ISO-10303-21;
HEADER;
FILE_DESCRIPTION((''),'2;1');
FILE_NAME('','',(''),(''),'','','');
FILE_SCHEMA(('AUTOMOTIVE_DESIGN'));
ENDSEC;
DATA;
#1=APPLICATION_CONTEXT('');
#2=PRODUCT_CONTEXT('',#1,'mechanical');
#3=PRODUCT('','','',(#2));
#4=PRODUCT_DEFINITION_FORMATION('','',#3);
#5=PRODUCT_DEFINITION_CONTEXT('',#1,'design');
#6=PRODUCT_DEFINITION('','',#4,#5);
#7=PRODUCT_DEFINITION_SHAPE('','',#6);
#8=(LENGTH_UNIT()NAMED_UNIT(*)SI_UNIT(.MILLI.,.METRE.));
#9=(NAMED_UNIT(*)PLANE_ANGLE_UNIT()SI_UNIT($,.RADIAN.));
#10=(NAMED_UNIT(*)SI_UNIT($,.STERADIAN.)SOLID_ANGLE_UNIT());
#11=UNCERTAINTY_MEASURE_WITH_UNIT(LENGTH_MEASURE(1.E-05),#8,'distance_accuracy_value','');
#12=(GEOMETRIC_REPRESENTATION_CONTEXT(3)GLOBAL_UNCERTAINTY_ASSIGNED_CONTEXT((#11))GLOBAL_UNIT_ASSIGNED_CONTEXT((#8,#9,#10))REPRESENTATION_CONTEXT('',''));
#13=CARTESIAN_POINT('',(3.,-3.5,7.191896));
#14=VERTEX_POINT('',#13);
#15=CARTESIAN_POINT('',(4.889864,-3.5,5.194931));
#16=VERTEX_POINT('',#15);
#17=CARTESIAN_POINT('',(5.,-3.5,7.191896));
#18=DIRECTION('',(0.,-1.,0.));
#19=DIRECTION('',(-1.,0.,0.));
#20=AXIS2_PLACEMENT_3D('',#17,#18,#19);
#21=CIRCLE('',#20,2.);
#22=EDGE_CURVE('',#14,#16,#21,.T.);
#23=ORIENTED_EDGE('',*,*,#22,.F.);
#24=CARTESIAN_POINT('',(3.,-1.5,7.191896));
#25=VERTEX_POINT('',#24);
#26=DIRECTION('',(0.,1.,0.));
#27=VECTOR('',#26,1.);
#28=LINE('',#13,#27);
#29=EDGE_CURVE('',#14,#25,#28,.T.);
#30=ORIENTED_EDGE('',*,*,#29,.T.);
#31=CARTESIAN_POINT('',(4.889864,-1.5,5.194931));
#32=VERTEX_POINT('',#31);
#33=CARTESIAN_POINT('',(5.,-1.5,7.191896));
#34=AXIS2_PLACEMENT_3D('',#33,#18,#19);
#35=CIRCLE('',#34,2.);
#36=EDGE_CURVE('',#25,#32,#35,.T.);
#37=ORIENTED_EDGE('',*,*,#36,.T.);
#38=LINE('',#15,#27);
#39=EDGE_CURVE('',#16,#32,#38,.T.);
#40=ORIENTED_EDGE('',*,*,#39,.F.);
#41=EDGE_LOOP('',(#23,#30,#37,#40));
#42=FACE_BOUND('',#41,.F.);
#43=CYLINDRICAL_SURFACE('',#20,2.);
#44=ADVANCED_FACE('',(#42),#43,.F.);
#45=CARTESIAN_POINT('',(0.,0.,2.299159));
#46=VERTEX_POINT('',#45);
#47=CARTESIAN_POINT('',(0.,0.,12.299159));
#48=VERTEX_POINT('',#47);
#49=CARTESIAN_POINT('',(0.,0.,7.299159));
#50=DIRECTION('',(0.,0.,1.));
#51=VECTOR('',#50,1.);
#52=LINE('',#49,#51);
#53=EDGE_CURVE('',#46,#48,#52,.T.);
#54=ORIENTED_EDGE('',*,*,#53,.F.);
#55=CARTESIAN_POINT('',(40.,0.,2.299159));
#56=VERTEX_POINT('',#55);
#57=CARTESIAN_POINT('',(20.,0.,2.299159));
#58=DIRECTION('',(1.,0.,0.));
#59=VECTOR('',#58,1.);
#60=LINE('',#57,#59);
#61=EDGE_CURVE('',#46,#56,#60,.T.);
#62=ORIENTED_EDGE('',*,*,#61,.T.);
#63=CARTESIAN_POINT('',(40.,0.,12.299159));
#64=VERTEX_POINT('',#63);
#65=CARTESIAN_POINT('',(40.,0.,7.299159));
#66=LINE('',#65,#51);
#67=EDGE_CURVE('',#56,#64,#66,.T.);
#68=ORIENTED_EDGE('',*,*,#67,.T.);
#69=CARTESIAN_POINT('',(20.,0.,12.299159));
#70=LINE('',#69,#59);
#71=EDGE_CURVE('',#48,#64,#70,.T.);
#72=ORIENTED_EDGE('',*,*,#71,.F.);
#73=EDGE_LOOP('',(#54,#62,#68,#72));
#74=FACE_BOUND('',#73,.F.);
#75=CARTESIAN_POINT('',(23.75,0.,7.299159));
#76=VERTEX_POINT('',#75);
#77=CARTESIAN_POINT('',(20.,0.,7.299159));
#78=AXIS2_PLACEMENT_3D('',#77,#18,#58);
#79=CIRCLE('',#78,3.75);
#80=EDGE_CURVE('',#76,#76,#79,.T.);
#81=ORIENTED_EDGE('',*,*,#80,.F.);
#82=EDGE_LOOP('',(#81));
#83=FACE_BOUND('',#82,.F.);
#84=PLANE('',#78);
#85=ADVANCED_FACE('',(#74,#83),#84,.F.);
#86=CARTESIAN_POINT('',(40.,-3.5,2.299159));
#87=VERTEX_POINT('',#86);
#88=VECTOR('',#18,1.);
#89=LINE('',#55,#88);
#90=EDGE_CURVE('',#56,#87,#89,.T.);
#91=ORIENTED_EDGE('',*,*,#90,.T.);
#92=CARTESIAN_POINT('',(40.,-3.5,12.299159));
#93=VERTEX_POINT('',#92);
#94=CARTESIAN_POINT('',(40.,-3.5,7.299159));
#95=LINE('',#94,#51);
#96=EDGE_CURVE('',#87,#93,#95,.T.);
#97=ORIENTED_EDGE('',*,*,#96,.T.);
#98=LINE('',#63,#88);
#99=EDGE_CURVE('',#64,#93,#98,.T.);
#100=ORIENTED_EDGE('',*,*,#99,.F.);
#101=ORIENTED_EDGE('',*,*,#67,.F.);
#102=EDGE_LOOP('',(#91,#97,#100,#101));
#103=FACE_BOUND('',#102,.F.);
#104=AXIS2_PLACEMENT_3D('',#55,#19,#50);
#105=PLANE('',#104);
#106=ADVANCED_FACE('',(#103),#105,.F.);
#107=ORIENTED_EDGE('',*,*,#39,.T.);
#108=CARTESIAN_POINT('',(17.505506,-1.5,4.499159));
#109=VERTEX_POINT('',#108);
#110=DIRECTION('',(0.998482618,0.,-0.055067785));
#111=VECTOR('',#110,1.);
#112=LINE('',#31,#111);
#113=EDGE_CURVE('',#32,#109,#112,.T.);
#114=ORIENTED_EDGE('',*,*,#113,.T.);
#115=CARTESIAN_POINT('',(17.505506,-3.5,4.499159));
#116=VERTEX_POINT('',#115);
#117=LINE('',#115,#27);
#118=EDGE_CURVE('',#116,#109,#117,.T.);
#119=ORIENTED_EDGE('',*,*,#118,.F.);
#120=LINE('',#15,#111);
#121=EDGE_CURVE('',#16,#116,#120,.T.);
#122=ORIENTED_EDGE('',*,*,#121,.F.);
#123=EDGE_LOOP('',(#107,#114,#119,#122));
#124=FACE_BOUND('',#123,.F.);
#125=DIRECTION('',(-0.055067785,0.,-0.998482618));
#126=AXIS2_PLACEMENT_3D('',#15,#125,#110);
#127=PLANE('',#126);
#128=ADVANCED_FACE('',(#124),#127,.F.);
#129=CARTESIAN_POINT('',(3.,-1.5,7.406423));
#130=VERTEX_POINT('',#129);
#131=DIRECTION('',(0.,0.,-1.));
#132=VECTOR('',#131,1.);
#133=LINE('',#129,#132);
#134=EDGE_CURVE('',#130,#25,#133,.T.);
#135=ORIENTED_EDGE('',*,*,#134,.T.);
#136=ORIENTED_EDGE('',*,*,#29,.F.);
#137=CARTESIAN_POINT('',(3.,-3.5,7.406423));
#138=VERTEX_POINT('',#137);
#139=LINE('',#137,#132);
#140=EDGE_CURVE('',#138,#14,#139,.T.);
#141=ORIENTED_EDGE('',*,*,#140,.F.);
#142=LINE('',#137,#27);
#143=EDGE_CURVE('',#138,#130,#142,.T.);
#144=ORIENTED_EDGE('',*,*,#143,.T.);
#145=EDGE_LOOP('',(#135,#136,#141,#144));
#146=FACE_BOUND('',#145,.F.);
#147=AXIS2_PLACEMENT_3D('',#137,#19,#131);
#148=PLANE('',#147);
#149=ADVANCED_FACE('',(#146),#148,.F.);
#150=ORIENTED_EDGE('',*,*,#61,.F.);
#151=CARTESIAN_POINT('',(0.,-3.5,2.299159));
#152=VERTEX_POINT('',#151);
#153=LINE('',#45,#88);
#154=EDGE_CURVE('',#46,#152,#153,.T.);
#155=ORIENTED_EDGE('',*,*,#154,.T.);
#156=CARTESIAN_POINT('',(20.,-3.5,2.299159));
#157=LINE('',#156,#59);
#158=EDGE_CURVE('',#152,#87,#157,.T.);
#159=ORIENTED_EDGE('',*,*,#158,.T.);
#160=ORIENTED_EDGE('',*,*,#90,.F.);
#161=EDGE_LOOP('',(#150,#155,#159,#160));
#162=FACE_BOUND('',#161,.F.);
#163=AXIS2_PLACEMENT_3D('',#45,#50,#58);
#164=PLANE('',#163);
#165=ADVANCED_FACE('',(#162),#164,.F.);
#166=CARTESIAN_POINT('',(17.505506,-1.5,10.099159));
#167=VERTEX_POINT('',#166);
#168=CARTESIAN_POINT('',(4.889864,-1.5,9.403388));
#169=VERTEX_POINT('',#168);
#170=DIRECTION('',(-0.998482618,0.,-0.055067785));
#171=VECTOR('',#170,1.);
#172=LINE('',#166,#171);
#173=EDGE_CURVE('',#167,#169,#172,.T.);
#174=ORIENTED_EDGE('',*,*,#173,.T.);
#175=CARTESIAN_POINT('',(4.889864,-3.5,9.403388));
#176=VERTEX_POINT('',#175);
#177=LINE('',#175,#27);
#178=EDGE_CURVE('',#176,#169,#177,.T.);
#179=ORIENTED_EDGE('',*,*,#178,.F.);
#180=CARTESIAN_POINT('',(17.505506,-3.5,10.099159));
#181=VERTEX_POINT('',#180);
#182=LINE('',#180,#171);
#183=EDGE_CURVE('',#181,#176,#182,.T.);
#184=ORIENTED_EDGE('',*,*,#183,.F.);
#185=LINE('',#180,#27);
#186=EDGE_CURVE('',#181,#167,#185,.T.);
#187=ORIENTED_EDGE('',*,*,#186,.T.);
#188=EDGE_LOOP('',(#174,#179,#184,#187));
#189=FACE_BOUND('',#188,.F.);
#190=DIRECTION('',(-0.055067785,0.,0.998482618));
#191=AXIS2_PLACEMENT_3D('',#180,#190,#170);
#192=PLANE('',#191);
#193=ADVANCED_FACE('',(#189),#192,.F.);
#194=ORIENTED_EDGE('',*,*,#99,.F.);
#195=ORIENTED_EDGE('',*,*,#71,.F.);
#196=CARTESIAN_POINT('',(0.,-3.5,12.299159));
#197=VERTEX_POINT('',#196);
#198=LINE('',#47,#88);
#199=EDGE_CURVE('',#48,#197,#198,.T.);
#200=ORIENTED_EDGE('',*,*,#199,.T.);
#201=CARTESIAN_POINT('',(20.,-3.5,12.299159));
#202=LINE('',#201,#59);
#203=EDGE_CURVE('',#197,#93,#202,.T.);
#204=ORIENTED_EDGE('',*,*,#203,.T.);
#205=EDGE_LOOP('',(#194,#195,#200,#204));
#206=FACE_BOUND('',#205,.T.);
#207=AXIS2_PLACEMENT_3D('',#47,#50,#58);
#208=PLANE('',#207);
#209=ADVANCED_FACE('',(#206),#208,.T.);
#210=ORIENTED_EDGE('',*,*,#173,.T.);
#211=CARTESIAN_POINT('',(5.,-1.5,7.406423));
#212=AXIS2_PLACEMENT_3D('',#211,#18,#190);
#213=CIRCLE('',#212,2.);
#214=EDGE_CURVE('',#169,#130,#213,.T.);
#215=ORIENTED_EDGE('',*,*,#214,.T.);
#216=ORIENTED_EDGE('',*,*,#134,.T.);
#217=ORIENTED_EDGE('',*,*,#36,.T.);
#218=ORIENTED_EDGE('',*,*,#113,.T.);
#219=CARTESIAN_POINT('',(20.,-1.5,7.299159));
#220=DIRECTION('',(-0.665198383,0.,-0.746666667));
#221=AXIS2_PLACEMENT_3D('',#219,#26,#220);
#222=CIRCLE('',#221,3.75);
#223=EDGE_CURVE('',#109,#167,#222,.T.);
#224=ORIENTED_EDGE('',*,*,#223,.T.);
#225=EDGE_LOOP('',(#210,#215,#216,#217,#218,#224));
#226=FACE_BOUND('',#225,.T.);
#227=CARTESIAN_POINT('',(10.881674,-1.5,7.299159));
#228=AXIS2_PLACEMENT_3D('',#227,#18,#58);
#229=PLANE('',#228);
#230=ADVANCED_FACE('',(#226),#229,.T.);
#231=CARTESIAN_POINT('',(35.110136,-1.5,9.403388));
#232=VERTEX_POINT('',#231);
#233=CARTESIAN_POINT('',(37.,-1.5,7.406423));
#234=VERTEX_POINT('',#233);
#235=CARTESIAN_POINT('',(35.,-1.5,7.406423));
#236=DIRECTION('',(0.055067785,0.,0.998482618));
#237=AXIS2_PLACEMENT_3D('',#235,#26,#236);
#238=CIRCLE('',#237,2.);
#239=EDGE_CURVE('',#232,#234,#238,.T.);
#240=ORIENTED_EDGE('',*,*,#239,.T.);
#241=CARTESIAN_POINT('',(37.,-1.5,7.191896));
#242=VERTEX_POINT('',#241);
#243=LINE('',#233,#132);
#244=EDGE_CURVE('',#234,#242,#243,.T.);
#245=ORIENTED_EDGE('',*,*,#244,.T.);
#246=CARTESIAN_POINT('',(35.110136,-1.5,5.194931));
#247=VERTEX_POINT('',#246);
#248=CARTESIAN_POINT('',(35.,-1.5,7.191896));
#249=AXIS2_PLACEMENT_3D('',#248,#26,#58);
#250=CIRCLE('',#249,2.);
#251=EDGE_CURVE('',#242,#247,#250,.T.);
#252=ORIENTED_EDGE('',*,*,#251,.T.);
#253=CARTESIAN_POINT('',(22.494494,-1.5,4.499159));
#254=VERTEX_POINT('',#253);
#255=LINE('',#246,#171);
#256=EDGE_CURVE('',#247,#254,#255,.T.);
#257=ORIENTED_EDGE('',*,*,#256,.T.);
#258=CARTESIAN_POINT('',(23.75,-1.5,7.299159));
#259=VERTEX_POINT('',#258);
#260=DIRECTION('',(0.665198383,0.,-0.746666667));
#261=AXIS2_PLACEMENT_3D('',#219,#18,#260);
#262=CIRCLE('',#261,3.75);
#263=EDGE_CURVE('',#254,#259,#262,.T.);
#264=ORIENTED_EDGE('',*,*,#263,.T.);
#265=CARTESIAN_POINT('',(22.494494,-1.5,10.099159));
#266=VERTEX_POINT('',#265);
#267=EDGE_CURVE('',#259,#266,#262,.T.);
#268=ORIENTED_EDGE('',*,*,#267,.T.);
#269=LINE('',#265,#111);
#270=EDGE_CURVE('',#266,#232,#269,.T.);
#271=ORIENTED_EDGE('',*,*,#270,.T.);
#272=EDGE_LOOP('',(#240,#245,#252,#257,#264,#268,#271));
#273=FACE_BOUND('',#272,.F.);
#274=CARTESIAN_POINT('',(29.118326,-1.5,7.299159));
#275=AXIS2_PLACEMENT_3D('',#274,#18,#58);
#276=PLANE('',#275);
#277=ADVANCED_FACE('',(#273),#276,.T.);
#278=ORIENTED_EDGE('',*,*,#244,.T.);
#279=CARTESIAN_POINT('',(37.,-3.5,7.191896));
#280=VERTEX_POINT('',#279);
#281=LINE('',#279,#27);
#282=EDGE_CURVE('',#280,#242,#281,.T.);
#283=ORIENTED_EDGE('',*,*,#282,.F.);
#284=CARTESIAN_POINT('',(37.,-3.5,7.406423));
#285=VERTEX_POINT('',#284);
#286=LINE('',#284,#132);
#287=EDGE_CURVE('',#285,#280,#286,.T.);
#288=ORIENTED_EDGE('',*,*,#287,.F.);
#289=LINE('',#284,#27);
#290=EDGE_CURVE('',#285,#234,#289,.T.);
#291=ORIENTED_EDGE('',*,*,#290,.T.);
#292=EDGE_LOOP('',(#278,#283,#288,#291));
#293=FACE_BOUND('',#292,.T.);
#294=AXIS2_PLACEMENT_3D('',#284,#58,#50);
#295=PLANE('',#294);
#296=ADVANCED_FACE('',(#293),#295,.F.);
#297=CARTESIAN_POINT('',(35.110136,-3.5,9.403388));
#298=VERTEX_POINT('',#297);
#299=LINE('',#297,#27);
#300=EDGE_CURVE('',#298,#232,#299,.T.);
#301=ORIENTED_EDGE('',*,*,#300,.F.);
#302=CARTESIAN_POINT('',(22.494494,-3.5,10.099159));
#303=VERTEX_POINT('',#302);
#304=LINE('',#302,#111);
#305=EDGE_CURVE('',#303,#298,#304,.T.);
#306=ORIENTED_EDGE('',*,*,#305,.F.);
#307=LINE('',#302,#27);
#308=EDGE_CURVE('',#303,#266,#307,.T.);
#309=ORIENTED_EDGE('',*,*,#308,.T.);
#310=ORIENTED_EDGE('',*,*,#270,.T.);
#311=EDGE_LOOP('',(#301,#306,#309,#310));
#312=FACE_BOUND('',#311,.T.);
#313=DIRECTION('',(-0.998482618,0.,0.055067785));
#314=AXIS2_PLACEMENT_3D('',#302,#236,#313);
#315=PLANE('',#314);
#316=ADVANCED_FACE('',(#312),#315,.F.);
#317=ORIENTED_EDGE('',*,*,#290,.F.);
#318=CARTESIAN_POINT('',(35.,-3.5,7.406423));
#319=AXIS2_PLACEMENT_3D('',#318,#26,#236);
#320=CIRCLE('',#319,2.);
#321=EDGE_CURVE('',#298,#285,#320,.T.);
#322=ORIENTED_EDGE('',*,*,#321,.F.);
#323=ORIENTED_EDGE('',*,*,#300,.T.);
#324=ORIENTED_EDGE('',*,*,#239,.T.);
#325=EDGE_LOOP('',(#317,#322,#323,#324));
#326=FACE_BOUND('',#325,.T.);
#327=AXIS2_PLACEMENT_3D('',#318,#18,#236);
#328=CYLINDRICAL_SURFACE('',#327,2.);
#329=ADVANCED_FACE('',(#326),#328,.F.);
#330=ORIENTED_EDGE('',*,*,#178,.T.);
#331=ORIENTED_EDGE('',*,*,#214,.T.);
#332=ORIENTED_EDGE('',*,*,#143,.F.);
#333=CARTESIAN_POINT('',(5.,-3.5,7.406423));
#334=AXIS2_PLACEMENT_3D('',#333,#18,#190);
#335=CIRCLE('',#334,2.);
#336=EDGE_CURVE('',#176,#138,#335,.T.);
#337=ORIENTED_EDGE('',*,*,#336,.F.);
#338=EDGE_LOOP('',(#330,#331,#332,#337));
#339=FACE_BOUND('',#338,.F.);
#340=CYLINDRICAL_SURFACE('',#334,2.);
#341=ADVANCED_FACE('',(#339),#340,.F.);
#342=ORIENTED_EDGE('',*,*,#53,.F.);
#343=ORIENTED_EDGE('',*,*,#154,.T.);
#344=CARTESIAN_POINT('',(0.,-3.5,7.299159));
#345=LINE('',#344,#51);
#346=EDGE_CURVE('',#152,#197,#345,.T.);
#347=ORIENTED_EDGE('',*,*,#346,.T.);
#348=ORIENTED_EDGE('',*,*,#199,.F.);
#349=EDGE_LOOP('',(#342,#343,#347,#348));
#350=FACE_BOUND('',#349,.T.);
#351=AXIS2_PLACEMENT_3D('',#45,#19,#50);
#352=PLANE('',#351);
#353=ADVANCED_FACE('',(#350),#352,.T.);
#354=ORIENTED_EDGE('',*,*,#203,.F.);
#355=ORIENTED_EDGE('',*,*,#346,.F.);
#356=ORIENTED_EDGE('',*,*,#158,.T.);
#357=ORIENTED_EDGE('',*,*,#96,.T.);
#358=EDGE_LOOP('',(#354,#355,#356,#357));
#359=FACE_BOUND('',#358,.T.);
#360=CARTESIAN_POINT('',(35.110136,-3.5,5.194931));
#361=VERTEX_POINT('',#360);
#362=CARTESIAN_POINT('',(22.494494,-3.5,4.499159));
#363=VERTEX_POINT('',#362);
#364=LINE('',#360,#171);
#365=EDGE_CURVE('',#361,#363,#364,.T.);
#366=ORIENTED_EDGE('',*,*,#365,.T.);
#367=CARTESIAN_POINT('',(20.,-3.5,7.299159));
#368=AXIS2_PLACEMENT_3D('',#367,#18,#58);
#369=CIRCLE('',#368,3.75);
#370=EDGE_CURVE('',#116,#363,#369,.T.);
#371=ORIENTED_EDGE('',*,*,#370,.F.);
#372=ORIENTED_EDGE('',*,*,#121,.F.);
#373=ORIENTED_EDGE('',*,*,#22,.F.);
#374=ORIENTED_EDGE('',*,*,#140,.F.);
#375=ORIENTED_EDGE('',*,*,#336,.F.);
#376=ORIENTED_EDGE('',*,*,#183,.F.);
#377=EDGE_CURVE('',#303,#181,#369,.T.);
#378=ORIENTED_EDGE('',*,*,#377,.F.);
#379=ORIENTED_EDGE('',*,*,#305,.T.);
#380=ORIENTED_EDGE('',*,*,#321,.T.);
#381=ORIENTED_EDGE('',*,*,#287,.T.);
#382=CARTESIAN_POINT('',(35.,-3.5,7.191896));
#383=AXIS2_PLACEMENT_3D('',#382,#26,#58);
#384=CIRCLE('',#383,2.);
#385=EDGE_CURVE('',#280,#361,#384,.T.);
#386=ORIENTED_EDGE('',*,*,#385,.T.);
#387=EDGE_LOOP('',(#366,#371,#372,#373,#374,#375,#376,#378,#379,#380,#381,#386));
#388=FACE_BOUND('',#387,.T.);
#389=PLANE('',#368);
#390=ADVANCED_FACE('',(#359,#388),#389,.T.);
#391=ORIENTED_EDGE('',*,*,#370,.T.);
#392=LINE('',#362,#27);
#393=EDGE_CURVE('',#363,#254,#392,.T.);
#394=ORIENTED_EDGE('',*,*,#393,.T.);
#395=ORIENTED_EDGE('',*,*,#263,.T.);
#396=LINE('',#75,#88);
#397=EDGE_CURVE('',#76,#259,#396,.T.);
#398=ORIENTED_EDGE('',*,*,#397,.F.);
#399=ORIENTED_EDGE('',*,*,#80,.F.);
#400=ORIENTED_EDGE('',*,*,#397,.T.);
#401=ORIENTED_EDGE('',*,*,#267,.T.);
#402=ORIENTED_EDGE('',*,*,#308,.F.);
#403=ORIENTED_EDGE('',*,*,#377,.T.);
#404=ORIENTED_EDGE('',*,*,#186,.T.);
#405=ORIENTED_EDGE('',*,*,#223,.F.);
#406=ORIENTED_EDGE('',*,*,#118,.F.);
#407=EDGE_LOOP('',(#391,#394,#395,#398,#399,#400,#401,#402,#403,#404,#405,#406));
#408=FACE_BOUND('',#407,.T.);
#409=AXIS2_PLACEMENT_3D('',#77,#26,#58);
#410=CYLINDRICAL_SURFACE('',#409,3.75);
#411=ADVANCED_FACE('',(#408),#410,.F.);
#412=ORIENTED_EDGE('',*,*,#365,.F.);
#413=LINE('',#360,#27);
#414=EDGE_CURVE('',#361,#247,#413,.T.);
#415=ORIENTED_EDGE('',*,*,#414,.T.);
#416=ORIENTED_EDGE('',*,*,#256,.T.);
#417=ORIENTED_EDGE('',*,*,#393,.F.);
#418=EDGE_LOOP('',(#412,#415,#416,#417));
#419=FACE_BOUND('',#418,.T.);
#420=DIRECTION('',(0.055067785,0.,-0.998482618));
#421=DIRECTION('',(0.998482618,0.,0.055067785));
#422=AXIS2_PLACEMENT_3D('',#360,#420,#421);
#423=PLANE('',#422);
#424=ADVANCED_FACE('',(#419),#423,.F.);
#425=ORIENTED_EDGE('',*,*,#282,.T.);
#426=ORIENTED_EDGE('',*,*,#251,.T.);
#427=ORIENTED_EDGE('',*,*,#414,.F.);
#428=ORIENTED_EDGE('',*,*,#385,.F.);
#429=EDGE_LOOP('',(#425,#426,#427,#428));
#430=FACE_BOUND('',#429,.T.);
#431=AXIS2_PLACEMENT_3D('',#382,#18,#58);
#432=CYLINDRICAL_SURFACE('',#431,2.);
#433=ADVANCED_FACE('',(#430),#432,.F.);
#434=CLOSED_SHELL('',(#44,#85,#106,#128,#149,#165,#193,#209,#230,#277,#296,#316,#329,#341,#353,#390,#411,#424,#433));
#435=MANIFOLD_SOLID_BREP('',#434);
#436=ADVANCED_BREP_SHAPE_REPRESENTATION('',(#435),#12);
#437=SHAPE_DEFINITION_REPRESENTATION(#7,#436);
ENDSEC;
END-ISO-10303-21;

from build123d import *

# Parameters (mm, degrees)
F0_W     = 40
F0_H     = 10
F0_R     = 3.75
F1_DEPTH = 3.5
F3_DEPTH = 2


# Not quite as in the source:
# - a pattern or mirror of a feature is missing from the dataset's text; its kind, count and spacing are read off the source's solid


with BuildPart() as f1:
    # F0 (on Front) → F1 (new body)
    with BuildSketch(Plane.XZ):
        with Locations((20, 7.299159328)):
            Rectangle(F0_W, F0_H)
        with Locations((20, 7.299159328)):
            Circle(F0_R, mode=Mode.SUBTRACT)
    extrude(amount=F1_DEPTH)

    # F2 (on face) → F3 (cut)
    with BuildSketch(Plane.XZ.offset(3.5)):
        with BuildLine():
            ThreePointArc((17.5055060633, 4.499159328), (16.25, 7.299159328), (17.5055060633, 10.099159328))
            Line((17.5055060633, 10.099159328), (4.8898644293, 9.4033881317))
            ThreePointArc((4.8898644293, 9.4033881317), (3.5473694307, 8.7811462961), (3, 7.4064228951))
            Line((3, 7.4064228951), (3, 7.1918957609))
            ThreePointArc((3, 7.1918957609), (3.5473694307, 5.8171723599), (4.8898644293, 5.1949305243))
            Line((4.8898644293, 5.1949305243), (17.5055060633, 4.499159328))
        make_face()
    f3 = extrude(amount=-F3_DEPTH, mode=Mode.SUBTRACT)

    # F3_copies: F3 across plane
    add(f3.mirror(Plane(origin=(20, 0, 0), x_dir=(0, 0, 1), z_dir=(1, 0, 0))), mode=Mode.SUBTRACT)


solid = f1.part
